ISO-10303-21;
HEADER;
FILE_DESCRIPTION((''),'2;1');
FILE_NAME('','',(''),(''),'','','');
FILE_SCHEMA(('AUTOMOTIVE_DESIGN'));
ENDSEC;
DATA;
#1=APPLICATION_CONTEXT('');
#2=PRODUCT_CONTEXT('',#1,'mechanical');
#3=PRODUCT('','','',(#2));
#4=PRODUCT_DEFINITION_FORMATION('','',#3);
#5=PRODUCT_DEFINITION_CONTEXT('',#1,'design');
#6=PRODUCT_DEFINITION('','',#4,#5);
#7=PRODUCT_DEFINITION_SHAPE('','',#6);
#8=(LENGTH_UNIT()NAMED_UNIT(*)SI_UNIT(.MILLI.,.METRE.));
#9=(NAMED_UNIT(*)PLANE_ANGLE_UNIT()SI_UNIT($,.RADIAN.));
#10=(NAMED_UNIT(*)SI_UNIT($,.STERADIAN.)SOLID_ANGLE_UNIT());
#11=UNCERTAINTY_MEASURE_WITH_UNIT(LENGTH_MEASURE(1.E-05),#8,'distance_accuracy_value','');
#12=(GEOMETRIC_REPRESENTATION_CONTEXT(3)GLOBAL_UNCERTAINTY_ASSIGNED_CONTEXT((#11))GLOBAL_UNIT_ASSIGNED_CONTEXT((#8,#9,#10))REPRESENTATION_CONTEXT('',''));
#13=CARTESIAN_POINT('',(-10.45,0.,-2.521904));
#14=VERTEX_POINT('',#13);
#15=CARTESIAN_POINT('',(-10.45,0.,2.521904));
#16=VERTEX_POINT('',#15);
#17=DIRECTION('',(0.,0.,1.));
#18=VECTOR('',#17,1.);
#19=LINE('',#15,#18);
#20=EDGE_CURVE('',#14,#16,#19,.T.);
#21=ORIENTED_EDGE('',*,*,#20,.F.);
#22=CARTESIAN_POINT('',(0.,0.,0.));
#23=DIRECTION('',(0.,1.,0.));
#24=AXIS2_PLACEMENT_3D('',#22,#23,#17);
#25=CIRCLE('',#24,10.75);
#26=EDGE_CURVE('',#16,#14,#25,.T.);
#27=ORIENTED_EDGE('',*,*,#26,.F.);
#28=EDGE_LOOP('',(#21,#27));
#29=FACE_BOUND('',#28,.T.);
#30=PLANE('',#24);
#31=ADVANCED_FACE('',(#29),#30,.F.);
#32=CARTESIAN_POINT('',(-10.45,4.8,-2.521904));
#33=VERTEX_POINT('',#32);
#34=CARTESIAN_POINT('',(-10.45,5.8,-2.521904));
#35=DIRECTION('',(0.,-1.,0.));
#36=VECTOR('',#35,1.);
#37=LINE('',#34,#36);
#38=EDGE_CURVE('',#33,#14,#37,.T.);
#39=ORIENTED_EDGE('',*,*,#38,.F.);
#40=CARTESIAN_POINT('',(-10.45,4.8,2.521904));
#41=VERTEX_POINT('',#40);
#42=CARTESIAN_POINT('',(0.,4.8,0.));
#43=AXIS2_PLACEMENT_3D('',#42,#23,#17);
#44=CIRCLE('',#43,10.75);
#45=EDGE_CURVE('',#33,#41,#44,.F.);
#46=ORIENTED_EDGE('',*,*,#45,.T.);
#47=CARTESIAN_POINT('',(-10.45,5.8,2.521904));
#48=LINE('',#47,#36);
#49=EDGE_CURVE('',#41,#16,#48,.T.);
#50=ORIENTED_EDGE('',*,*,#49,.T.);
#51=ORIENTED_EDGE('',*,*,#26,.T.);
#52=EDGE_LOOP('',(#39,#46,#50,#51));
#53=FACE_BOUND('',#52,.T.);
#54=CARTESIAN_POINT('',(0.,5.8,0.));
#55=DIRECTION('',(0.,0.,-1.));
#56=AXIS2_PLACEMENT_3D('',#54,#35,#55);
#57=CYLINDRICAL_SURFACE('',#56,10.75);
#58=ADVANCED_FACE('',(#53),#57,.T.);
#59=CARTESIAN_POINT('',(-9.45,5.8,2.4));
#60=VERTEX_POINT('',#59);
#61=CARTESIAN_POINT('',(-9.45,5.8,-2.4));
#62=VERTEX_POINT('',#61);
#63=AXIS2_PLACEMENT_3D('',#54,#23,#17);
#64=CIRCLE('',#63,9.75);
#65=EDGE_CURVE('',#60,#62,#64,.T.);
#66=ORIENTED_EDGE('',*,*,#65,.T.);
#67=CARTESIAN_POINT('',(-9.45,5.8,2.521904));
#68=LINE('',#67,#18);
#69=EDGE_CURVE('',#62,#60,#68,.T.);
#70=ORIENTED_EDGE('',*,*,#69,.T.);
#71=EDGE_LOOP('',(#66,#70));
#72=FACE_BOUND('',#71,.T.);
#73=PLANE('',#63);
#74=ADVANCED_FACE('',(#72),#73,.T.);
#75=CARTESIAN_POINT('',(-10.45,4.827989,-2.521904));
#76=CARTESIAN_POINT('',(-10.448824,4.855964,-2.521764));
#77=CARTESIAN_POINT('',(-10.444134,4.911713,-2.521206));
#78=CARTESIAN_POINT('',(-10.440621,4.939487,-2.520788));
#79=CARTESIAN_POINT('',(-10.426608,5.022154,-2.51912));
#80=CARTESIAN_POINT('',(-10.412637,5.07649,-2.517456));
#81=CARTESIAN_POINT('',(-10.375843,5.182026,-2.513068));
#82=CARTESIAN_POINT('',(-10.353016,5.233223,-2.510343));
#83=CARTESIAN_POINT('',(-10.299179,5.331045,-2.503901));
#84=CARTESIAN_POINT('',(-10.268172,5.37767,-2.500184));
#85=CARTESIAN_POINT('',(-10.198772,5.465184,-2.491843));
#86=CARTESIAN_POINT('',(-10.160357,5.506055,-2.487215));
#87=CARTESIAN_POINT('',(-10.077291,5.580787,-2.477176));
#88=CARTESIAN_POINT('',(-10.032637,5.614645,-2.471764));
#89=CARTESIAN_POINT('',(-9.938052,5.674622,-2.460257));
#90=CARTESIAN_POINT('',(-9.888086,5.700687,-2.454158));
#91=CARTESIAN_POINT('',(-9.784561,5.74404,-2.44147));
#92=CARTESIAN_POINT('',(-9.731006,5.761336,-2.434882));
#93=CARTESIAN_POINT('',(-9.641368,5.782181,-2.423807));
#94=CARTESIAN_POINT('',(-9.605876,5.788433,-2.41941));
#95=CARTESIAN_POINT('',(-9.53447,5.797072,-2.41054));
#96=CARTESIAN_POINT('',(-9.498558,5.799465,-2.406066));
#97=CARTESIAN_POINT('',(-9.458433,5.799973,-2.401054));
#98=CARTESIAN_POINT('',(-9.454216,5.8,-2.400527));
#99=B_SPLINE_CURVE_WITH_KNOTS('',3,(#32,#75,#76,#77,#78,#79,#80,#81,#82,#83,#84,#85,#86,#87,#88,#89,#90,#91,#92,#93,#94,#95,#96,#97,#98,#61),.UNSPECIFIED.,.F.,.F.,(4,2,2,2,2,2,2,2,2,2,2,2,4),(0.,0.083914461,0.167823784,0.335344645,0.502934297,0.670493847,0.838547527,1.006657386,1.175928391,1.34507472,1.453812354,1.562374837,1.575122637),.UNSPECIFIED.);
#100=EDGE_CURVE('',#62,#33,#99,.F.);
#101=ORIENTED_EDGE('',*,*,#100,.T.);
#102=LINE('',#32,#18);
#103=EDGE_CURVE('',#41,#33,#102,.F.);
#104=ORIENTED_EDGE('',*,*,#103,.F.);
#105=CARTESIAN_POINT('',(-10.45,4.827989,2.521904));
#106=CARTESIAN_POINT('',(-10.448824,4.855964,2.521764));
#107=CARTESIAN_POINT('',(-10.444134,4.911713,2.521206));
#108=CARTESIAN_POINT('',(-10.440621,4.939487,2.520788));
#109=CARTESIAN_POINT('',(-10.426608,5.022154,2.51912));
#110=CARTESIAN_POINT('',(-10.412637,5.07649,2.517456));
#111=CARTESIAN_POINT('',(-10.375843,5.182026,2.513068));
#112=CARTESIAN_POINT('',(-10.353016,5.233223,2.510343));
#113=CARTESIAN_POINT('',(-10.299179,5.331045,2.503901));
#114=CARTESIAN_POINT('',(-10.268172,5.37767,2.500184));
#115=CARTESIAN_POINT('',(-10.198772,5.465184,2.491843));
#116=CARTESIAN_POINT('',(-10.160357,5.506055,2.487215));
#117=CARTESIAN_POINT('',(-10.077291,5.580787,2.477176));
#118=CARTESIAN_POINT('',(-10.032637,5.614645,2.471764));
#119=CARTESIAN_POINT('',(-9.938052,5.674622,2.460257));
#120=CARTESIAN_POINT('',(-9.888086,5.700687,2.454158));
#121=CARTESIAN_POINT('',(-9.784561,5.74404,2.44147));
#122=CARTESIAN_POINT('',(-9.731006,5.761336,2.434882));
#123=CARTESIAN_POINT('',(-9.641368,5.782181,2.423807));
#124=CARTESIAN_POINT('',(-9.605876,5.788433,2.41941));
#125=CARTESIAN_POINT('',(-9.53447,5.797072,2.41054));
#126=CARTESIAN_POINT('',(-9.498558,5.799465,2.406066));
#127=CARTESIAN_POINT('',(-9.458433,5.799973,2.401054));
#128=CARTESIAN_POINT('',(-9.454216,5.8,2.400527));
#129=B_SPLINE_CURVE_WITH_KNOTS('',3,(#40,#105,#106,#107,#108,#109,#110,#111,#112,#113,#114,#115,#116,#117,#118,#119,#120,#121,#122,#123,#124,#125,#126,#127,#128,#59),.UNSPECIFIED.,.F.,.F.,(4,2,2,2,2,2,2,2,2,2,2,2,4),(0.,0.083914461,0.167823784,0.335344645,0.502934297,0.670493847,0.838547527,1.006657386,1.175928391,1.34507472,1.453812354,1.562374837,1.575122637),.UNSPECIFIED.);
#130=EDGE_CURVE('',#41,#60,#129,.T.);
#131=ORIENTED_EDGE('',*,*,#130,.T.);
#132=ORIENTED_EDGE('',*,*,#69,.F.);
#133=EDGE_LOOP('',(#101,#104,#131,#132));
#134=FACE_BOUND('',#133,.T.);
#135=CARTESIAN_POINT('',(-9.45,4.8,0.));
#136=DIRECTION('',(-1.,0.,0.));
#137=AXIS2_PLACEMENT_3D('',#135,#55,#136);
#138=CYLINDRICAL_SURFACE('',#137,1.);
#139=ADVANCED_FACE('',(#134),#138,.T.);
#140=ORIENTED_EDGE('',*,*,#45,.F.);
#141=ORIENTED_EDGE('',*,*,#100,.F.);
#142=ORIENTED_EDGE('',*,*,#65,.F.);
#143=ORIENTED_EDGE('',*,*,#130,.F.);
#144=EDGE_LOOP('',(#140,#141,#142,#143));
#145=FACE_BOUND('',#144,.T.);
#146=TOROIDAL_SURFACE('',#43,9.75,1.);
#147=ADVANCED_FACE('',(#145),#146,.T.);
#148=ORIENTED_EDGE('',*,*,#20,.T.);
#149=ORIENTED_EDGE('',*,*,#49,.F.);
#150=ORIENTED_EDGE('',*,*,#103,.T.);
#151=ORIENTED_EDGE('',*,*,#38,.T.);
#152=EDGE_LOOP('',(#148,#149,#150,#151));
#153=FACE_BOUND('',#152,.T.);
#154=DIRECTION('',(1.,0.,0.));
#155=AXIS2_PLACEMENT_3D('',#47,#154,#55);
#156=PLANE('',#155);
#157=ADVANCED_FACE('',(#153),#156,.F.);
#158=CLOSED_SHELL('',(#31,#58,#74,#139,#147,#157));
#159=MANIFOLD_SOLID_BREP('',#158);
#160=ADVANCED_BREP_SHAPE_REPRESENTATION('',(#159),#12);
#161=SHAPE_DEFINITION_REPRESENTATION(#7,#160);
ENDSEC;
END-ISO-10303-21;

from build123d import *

# Parameters (mm, degrees)
BOSS_EXTRU_1_DEPTH = 5.8
CONG_1_R           = 1


with BuildPart() as part:
    # Esquisse1 → Boss.-Extru.1 (new body)
    with BuildSketch(Plane(origin=(0, 0, 0), x_dir=(1, 0, 0), z_dir=(0, 1, 0))):
        with BuildLine():
            Line((-10.449999999999998, -2.521904042583706), (-10.449999999999998, 2.5219040425837056))
            ThreePointArc((-10.449999999999998, 2.5219040425837056), (10.75, 0), (-10.449999999999998, -2.521904042583706))
        make_face()
    extrude(amount=BOSS_EXTRU_1_DEPTH)

    # Congé1
    # the kernel refuses this fillet: 1 mm, written as the material it takes off along each edge
    with BuildSketch(Plane(origin=(4.2e-16, 5.8, 8.22e-15), x_dir=(-0.9999956130716774, 0, -0.0029620664070946516), z_dir=(-0.0029620664070946516, 0, 0.9999956130716774))) as cong_1_piece_1:
        with BuildLine():
            CenterArc((10.750000000000002 - CONG_1_R, CONG_1_R), CONG_1_R, 270, 90)
            Line((10.750000000000002 - CONG_1_R, 0), (10.750000000000002, 0))
            Line((10.750000000000002, 0), (10.750000000000002, CONG_1_R))
        make_face()
    revolve(axis=Axis((4.2e-16, 5.8, 8.22e-15), (0, -1, 0)), revolution_arc=359.66057169612264, mode=Mode.SUBTRACT)
    with BuildSketch(Plane(origin=(-10.449999999999998, 5.8, 5.0219040425837065), x_dir=(0, -1, 0), z_dir=(0, 0, -1))) as cong_1_piece_2:
        with BuildLine():
            CenterArc((CONG_1_R, -CONG_1_R), CONG_1_R, 90, 90)
            Line((0, -CONG_1_R), (0, 0))
            Line((0, 0), (CONG_1_R, 0))
        make_face()
    extrude(amount=10.043808085167411, mode=Mode.SUBTRACT)


solid = part.part
